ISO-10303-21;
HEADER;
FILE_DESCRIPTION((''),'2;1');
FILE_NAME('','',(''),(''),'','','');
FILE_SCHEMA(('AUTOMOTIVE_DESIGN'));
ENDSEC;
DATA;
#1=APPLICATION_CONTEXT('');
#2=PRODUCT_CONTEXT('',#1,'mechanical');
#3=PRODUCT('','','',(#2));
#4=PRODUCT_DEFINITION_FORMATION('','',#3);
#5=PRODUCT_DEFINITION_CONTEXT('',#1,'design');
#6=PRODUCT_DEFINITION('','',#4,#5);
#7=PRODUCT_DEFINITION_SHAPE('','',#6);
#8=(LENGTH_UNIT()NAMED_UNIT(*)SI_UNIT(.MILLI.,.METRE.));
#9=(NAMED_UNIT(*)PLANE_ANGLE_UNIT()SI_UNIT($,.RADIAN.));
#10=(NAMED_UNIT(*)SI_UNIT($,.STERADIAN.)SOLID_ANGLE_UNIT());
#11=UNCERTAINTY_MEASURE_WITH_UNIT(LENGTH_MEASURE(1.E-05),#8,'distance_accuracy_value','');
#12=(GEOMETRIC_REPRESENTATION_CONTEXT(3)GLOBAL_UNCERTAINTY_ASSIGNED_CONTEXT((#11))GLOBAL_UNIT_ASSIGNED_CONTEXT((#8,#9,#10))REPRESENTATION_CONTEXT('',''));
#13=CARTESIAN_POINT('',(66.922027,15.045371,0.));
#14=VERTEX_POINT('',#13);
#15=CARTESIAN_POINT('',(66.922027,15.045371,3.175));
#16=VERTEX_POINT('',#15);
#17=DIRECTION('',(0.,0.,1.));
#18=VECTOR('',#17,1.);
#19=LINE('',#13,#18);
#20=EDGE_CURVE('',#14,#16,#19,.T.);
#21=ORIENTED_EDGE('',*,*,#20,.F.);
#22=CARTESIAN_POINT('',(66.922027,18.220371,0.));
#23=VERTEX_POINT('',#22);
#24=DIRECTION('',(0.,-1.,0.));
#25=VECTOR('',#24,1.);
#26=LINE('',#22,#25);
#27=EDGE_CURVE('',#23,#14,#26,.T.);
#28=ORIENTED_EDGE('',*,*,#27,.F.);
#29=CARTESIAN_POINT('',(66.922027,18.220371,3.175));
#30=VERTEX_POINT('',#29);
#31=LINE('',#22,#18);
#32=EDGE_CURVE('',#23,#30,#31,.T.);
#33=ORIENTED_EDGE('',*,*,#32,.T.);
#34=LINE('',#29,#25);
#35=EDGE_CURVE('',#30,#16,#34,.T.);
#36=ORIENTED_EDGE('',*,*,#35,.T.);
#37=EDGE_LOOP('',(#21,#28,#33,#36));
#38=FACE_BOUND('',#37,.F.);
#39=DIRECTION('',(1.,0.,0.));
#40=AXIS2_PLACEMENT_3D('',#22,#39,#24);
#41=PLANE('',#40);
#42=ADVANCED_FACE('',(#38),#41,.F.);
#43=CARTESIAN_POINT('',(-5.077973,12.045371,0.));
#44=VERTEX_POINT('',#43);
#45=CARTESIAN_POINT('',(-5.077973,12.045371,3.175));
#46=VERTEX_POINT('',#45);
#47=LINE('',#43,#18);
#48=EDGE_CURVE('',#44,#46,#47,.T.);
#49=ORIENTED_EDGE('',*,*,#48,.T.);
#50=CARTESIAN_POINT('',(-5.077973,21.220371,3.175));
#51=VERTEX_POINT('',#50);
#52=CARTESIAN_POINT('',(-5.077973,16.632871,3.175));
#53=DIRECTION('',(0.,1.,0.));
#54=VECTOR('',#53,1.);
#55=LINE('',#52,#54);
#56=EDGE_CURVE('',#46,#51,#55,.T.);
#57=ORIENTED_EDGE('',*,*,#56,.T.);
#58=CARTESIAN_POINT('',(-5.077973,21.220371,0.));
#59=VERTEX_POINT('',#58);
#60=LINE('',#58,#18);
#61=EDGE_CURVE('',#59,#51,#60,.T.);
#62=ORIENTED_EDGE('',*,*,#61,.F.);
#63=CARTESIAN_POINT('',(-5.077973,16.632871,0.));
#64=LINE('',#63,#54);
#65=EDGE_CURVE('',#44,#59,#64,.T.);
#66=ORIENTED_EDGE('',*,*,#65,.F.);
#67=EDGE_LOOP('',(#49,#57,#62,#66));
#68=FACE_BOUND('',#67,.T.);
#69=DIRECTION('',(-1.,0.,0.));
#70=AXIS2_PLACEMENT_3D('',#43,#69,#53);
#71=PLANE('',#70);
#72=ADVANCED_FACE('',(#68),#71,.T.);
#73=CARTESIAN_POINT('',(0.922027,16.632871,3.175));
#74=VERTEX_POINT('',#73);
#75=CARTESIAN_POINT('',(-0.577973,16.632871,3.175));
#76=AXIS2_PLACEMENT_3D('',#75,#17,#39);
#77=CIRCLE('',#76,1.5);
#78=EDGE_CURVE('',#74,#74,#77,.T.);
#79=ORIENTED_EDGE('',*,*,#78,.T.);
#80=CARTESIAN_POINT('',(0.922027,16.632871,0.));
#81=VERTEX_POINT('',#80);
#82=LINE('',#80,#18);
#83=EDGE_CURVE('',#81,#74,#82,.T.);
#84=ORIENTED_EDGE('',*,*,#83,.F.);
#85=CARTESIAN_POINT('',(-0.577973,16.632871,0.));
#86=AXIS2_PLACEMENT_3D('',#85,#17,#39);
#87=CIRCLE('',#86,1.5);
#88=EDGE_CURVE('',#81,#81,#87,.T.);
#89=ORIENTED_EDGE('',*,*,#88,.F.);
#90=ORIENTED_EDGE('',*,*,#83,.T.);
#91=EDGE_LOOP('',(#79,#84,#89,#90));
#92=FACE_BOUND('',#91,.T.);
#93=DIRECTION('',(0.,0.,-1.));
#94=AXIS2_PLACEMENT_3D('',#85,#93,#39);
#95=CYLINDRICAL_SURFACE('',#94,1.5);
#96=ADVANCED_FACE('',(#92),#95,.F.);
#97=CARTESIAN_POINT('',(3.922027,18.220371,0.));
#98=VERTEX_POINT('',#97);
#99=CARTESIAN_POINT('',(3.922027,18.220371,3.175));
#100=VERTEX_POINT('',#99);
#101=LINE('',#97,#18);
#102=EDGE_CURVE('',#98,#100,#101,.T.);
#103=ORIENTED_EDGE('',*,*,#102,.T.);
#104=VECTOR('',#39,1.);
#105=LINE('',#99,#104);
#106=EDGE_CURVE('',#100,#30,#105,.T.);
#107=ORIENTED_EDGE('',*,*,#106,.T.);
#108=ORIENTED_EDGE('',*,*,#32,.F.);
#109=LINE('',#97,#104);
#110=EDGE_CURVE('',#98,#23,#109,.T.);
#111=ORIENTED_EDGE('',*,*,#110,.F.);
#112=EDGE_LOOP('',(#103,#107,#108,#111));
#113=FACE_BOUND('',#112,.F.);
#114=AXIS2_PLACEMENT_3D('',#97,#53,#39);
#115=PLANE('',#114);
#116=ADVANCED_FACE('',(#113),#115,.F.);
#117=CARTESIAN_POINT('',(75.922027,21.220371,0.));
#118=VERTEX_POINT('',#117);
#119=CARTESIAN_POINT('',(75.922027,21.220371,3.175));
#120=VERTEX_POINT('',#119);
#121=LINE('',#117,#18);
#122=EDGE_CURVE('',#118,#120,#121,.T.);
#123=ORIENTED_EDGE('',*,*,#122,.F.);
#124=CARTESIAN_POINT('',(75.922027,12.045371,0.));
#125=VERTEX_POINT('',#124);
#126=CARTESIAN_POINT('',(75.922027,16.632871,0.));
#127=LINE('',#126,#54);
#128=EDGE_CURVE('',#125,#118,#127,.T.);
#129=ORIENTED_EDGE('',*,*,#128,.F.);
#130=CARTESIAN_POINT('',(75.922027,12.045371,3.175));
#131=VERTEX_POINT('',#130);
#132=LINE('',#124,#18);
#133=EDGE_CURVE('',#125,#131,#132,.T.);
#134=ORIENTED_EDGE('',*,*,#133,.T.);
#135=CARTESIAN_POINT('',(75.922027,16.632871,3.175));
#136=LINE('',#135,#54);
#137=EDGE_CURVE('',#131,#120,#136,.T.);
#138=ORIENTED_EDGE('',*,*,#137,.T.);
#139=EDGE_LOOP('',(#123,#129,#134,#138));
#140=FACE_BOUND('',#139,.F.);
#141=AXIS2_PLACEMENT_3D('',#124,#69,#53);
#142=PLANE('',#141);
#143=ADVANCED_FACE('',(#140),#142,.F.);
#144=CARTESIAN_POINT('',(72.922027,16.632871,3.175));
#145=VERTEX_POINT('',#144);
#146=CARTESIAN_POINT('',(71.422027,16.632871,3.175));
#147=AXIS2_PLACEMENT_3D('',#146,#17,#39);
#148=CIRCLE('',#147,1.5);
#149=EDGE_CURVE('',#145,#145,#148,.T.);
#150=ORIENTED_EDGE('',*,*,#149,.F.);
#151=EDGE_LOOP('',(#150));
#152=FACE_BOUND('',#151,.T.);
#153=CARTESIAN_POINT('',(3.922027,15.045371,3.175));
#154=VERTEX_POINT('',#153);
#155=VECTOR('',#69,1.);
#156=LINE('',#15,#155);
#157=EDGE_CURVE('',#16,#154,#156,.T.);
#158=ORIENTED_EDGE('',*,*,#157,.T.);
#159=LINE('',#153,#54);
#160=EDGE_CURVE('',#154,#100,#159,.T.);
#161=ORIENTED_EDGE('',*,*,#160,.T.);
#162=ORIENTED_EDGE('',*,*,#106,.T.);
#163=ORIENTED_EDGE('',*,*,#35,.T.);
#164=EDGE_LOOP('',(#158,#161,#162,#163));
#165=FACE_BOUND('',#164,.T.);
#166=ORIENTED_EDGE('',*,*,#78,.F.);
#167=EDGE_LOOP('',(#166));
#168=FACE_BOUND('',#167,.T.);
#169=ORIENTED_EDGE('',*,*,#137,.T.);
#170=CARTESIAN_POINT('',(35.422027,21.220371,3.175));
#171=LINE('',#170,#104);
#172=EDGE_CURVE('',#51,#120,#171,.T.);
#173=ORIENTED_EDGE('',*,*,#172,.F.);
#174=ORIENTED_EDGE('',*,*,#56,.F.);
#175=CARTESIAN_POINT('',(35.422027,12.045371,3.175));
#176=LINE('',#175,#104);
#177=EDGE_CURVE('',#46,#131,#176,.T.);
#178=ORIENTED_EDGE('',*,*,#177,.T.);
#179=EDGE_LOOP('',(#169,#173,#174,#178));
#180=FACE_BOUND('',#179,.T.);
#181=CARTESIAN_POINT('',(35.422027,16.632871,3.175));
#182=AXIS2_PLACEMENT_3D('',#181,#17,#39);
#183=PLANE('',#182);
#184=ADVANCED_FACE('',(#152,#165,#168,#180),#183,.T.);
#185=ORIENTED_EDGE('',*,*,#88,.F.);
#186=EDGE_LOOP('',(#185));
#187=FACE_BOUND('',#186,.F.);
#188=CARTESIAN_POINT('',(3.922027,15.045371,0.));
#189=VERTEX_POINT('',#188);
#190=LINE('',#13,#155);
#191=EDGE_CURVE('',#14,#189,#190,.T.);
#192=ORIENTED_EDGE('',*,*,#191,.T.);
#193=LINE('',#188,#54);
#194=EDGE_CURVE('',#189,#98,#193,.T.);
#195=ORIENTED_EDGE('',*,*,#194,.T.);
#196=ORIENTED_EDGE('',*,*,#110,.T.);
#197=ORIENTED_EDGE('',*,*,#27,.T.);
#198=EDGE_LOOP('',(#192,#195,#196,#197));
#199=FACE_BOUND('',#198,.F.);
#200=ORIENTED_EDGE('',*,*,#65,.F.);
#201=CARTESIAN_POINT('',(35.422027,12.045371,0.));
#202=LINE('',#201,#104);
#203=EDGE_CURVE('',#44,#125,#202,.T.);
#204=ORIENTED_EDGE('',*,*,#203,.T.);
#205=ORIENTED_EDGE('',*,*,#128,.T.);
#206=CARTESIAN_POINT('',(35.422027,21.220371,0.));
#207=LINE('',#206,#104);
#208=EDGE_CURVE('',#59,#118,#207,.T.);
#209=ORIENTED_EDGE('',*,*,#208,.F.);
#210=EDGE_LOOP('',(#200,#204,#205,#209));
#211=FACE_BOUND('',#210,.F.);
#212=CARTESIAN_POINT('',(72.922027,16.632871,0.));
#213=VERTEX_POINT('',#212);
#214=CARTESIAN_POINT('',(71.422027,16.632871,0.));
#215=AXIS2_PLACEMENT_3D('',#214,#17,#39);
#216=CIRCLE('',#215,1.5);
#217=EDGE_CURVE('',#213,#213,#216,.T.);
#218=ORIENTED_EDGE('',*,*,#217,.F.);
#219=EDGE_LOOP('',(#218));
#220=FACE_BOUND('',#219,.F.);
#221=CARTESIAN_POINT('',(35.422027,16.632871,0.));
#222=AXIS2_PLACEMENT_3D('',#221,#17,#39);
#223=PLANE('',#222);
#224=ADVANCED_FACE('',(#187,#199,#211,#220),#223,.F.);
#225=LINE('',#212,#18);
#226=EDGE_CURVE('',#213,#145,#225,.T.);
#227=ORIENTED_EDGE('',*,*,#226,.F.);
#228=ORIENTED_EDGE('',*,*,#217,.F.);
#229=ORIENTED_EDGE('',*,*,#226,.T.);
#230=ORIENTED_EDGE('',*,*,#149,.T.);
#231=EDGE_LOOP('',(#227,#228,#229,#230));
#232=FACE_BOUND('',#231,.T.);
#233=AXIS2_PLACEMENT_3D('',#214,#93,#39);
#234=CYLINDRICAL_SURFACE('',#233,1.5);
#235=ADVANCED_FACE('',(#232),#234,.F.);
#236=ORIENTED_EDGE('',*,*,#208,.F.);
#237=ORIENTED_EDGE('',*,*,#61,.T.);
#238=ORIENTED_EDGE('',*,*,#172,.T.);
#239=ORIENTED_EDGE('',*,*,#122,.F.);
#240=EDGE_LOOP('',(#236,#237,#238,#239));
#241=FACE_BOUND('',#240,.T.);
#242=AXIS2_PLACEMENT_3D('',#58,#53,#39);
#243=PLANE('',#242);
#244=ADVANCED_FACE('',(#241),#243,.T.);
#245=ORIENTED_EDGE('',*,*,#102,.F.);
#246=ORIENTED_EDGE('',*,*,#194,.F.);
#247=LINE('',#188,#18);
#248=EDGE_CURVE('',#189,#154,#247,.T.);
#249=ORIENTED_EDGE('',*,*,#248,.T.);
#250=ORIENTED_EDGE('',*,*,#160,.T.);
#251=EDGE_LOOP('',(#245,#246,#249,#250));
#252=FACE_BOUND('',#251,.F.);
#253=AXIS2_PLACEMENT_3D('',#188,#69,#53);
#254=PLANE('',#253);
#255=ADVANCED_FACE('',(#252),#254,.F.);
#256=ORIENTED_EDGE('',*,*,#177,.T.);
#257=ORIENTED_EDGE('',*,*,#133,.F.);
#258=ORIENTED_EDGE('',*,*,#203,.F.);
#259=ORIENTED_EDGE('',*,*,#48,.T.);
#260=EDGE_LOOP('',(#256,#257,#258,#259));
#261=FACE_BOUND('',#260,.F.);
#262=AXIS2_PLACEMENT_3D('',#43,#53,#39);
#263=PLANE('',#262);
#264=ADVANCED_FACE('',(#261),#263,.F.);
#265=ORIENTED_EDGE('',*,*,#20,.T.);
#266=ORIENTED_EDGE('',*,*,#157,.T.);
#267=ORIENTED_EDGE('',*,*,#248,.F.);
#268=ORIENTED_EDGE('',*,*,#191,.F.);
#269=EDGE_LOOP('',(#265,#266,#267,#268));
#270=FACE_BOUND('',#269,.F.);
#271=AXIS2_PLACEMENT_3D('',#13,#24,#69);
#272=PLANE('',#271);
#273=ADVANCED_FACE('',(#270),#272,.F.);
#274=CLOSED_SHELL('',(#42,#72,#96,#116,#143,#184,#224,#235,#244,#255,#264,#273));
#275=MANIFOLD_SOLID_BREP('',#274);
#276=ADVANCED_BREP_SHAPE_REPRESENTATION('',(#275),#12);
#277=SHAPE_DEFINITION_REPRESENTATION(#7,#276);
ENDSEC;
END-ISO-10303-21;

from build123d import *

# Parameters (mm, degrees)
F0_W     = 81
F0_H     = 9.175
F0_R     = 1.5
F1_DEPTH = 3.175


# Not quite as in the source:
# - a length typed as a fraction of an inch, garbled in the dataset ("3 / 203.2 mm" for 3/8 in), is restored


with BuildPart() as f1:
    # F0 (on Top) → F1 (new body)
    with BuildSketch(Plane.XY):
        with Locations((35.4220271409, 16.632870598)):
            Rectangle(F0_W, F0_H)
        with Locations((-0.5779728591, 16.632870598)):
            Circle(F0_R, mode=Mode.SUBTRACT)
        Polygon((3.9220271409, 15.045370598), (3.9220271409, 18.220370598), (35.4220271409, 18.220370598), (66.9220271409, 18.220370598), (66.9220271409, 15.045370598), align=None, mode=Mode.SUBTRACT)
        with Locations((71.4220271409, 16.632870598)):
            Circle(F0_R, mode=Mode.SUBTRACT)
    extrude(amount=F1_DEPTH)


solid = f1.part
